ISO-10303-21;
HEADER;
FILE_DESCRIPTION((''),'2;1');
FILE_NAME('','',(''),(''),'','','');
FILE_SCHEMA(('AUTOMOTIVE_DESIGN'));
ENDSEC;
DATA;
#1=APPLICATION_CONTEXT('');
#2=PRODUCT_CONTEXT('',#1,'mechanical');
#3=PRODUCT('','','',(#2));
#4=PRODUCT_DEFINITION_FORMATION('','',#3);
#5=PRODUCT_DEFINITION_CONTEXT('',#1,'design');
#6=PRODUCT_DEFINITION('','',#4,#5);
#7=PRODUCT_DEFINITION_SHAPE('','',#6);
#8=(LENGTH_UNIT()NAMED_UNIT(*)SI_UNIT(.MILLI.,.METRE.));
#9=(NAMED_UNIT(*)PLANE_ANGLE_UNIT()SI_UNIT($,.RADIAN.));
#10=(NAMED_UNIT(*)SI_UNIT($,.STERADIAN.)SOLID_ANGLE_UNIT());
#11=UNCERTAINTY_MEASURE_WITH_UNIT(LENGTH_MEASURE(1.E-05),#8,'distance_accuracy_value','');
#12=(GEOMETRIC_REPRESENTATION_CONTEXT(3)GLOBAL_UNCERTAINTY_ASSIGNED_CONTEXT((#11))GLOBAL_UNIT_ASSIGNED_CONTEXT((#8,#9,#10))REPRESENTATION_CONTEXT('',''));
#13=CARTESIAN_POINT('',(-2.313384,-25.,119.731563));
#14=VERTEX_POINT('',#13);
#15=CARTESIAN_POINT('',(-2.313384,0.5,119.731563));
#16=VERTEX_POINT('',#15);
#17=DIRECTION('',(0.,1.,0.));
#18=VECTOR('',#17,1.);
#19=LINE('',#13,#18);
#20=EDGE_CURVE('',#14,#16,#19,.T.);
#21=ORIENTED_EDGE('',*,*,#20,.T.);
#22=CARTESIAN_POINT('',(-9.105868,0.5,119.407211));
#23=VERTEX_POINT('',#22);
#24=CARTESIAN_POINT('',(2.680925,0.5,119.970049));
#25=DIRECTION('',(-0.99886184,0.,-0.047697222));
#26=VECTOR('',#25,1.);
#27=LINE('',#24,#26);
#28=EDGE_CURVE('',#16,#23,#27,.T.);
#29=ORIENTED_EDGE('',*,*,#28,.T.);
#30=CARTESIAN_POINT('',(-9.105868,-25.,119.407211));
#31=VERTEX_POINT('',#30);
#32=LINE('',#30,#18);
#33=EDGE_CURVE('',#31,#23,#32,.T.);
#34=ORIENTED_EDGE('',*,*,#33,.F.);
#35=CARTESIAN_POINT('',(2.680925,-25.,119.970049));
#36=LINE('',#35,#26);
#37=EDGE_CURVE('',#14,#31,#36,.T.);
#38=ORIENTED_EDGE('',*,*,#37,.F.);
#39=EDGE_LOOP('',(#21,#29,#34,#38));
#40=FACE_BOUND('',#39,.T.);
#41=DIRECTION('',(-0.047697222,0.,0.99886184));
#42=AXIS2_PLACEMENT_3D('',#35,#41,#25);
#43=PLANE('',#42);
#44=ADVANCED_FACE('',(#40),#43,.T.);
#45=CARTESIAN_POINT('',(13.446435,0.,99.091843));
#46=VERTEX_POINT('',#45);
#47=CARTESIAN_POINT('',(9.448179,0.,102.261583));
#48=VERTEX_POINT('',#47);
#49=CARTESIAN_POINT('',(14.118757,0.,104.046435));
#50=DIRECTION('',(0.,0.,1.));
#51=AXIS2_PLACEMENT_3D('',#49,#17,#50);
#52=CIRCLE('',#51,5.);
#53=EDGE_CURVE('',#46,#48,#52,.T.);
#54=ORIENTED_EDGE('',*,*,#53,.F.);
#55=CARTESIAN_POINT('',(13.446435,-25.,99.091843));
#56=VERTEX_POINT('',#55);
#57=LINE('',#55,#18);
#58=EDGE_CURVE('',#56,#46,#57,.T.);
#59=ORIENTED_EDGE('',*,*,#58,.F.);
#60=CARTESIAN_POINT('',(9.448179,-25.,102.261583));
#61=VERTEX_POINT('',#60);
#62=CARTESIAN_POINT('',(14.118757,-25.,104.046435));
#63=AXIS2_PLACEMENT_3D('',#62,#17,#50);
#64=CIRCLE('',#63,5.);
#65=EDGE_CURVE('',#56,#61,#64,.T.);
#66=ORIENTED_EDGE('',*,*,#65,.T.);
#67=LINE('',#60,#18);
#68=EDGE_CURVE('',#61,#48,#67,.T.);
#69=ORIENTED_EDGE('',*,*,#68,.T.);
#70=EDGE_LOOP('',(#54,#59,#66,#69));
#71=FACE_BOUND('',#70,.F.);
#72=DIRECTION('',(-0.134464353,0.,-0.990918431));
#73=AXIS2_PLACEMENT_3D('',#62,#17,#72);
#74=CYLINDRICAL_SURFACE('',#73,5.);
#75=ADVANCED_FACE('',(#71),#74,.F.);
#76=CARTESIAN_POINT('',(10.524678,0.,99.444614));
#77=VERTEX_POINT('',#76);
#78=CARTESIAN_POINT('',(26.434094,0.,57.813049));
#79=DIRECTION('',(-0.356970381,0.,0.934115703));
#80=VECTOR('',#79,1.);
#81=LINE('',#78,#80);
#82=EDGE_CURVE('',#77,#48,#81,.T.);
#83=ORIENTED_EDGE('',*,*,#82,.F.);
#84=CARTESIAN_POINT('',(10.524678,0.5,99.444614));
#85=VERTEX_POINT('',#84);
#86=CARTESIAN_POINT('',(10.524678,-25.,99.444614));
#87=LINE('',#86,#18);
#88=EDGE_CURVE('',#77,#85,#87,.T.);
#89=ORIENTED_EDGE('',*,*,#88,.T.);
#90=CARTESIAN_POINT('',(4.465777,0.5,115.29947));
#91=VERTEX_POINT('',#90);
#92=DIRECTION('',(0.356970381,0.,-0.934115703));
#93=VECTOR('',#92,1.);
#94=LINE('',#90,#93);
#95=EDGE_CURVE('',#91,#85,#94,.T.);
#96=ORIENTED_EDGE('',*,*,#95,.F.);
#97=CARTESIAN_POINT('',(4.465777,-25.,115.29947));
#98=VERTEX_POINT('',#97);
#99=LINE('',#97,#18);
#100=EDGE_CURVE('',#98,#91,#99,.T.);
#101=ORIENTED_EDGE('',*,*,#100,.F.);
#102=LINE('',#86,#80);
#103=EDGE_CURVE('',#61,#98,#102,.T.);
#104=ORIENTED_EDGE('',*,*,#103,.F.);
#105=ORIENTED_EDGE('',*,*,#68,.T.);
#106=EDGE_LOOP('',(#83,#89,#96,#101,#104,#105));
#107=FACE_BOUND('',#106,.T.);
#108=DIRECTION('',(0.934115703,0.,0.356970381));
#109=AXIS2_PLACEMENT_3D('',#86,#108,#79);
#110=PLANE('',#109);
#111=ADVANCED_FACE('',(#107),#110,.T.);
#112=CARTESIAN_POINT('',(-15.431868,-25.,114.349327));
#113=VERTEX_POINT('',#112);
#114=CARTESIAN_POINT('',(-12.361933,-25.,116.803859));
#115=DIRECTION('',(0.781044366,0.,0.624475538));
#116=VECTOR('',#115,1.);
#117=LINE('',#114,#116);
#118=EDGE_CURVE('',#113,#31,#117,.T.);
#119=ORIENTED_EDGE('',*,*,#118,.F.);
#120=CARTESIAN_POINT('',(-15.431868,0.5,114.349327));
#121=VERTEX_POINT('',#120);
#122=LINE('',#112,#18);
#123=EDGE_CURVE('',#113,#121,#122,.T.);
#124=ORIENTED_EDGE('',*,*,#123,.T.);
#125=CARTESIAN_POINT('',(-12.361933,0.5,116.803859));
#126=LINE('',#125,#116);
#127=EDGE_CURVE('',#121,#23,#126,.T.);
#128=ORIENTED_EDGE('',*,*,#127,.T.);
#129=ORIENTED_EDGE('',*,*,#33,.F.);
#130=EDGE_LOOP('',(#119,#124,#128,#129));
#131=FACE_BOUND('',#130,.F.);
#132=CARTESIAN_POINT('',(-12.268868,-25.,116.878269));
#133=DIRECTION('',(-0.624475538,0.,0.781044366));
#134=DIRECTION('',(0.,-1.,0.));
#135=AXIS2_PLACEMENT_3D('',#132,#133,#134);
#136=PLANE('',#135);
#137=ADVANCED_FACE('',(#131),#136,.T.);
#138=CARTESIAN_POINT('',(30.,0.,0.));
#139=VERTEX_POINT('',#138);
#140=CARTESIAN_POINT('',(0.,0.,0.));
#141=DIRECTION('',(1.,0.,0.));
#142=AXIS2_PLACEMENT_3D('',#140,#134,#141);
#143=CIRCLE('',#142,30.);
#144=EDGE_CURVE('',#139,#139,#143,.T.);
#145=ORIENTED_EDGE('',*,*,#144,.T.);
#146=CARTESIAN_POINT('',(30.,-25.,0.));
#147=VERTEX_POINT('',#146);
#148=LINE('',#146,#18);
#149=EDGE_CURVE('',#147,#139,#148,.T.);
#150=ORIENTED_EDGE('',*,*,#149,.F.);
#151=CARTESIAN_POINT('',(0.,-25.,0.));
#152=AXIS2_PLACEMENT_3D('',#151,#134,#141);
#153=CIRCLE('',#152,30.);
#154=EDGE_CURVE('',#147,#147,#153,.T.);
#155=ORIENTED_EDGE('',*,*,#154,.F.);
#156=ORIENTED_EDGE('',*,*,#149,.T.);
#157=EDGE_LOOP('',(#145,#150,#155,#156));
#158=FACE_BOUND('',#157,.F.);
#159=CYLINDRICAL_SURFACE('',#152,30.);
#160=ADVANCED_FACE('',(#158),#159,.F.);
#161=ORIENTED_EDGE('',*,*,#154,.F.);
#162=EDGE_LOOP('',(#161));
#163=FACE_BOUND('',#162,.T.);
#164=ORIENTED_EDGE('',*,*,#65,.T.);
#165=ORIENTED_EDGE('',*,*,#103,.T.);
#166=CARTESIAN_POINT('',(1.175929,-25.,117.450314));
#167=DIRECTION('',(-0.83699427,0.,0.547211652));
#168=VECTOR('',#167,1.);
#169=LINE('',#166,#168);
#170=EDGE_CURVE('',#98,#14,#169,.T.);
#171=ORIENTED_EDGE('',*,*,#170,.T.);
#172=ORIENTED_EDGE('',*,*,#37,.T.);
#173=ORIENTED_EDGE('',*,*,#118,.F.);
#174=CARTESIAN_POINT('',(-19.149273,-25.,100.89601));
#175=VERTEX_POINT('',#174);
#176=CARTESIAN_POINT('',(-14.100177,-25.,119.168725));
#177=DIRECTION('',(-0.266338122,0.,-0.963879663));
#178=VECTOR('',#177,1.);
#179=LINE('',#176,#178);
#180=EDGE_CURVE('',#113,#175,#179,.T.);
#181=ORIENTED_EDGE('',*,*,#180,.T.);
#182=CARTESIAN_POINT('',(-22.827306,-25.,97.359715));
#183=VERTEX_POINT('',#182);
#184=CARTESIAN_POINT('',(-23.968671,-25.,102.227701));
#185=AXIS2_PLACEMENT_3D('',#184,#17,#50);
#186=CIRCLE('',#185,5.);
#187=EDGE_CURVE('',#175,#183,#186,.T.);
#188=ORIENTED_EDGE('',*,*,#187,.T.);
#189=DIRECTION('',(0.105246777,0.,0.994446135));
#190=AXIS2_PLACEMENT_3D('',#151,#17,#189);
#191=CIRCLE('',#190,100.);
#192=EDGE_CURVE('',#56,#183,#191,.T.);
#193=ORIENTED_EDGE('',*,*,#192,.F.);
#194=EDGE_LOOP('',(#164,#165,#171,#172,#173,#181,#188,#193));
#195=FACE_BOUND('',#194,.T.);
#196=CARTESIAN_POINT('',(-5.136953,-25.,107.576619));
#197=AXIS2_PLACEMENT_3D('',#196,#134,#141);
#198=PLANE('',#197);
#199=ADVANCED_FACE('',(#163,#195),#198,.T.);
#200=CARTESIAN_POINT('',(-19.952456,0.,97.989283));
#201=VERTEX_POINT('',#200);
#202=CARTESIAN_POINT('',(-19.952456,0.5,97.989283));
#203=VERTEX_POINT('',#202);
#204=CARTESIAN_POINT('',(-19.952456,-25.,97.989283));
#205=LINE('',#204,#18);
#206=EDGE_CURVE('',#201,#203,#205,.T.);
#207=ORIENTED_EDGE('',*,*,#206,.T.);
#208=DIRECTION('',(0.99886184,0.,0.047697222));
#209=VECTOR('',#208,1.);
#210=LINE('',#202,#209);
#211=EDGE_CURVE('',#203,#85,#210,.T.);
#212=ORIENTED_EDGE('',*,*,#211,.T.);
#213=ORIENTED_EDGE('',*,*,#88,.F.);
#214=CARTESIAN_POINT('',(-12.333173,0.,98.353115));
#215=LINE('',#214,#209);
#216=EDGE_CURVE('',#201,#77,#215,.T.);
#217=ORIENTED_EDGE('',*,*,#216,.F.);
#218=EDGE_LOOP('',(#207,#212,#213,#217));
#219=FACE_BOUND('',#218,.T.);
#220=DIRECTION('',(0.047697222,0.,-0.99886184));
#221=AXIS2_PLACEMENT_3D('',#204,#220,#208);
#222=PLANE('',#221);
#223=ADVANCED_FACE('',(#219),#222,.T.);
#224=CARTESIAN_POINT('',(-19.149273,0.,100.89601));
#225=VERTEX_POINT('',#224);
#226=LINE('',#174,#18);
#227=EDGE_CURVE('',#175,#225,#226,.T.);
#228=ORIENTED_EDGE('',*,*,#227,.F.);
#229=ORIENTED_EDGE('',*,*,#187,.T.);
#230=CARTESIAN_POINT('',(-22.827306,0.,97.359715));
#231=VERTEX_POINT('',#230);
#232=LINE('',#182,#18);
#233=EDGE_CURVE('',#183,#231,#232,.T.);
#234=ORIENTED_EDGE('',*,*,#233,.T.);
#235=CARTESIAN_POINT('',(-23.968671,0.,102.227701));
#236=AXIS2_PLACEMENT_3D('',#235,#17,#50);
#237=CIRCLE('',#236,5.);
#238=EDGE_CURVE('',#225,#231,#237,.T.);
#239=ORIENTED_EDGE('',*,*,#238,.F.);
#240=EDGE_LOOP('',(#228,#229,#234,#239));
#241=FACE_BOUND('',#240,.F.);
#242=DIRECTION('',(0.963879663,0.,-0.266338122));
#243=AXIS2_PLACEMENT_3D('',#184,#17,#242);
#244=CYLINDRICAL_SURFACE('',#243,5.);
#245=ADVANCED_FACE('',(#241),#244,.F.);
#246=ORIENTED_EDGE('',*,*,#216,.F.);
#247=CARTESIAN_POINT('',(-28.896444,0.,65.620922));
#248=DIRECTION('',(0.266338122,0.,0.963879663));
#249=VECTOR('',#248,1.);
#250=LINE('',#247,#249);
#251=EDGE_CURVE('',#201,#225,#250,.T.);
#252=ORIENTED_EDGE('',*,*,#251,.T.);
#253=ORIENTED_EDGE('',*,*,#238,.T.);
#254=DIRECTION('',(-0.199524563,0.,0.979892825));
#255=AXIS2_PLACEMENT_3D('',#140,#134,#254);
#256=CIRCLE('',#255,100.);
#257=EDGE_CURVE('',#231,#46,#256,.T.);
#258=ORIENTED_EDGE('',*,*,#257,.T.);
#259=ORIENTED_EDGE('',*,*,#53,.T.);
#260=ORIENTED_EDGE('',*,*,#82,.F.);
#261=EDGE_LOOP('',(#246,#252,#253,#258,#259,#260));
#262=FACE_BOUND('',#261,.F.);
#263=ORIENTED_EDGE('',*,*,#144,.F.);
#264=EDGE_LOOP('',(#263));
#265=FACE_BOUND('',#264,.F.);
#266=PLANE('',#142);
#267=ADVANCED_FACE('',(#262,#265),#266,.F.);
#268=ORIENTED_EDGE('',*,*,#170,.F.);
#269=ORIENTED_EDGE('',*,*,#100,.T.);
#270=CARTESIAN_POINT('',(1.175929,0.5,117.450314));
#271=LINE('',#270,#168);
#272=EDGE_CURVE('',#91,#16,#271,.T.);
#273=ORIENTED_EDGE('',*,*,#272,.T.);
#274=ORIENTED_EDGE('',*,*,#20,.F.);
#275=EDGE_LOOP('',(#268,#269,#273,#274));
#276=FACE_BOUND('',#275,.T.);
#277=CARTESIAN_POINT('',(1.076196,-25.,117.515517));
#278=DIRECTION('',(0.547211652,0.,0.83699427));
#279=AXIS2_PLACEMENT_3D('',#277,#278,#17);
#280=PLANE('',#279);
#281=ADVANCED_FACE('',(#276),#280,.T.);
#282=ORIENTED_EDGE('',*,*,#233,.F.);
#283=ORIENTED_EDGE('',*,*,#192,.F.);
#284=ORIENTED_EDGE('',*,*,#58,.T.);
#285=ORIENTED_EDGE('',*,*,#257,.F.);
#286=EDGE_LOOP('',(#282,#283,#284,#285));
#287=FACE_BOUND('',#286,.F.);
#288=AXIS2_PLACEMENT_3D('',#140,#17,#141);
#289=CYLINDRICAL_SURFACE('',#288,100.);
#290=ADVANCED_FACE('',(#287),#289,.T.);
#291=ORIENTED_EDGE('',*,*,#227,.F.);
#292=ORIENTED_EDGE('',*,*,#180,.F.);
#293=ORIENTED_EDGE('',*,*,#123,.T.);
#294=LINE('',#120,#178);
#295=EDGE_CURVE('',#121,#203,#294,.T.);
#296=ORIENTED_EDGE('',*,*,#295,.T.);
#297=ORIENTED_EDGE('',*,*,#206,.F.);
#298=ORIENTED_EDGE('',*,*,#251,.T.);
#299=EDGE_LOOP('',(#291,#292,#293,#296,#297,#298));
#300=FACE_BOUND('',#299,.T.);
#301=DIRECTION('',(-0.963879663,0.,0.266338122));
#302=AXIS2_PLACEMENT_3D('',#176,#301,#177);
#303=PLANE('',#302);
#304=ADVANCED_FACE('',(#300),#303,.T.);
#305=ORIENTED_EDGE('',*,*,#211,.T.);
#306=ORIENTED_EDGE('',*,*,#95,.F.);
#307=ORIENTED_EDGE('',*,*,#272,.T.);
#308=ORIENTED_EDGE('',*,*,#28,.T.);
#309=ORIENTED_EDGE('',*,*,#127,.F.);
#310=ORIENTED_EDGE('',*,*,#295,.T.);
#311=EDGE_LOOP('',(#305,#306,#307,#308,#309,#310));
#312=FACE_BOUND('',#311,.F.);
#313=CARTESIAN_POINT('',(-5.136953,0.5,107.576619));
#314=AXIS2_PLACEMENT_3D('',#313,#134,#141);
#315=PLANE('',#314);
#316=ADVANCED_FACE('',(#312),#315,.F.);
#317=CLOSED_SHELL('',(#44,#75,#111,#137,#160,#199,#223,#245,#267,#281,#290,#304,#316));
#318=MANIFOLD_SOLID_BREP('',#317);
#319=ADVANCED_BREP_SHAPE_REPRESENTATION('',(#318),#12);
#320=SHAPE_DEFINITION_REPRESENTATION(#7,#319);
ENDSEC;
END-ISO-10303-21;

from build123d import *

# Parameters (mm, degrees)
F0_R     = 100
F1_DEPTH = 25
F3_DEPTH = 25.5
F4_SIZE  = 5
F5_R     = 5
F6_R     = 30
F7_DEPTH = 25.501


with BuildPart() as f1:
    # F0 (on Front) → F1 (new body)
    with BuildSketch(Plane.XZ):
        Circle(F0_R)
    extrude(amount=F1_DEPTH)

    # F2 (on face) → F3 (join)
    with BuildSketch(Plane.XZ.offset(25)):
        Polygon((-14.1001771265, 119.1687249449), (-19.9524563423, 97.9892825053), (10.5246777377, 99.4446135219), (2.6809251073, 119.9700489313), align=None)
    extrude(amount=-F3_DEPTH)

    # F4
    f4_edges = [f1.edges().sort_by_distance(p)[0] for p in [
        (2.680925, -12.25, 119.970049),
        (-14.100177, -12.25, 119.168725),
    ]]
    chamfer(f4_edges, length=F4_SIZE)

    # F5
    f5_edges = [f1.edges().sort_by_distance(p)[0] for p in [
        (-19.952456, -12.5, 97.989283),
        (10.524678, -12.5, 99.444614),
    ]]
    fillet(f5_edges, radius=F5_R)

    # F6 (on face) + F1_face1 (on face) → F7 (cut, through all)
    with BuildSketch(Plane.XZ.offset(25)):
        Circle(F6_R)
    with BuildSketch(Plane(origin=(0.0031470854, 0, -0.0659053797), x_dir=(1, 0, 0), z_dir=(0, 1, 0))):
        with BuildLine():
            ThreePointArc((13.4432882004, -99.1577485259), (4.7665750707, 99.8202786027), (-22.8304528013, -97.4256204252))
            ThreePointArc((-22.8304528013, -97.4256204252), (-20.5064145734, -98.6893061779), (-19.1524197717, -100.9619155688))
            Line((-19.1524197717, -100.9619155688), (-19.9556034276, -98.055187885))
            Line((-19.9556034276, -98.055187885), (10.5215306523, -99.5105189016))
            Line((10.5215306523, -99.5105189016), (9.4450314489, -102.3274887768))
            ThreePointArc((9.4450314489, -102.3274887768), (11.0094130673, -100.1942364433), (13.4432882004, -99.1577485259))
        make_face()
    extrude(amount=-F7_DEPTH, dir=(0, -1, 0), mode=Mode.SUBTRACT)


solid = f1.part
